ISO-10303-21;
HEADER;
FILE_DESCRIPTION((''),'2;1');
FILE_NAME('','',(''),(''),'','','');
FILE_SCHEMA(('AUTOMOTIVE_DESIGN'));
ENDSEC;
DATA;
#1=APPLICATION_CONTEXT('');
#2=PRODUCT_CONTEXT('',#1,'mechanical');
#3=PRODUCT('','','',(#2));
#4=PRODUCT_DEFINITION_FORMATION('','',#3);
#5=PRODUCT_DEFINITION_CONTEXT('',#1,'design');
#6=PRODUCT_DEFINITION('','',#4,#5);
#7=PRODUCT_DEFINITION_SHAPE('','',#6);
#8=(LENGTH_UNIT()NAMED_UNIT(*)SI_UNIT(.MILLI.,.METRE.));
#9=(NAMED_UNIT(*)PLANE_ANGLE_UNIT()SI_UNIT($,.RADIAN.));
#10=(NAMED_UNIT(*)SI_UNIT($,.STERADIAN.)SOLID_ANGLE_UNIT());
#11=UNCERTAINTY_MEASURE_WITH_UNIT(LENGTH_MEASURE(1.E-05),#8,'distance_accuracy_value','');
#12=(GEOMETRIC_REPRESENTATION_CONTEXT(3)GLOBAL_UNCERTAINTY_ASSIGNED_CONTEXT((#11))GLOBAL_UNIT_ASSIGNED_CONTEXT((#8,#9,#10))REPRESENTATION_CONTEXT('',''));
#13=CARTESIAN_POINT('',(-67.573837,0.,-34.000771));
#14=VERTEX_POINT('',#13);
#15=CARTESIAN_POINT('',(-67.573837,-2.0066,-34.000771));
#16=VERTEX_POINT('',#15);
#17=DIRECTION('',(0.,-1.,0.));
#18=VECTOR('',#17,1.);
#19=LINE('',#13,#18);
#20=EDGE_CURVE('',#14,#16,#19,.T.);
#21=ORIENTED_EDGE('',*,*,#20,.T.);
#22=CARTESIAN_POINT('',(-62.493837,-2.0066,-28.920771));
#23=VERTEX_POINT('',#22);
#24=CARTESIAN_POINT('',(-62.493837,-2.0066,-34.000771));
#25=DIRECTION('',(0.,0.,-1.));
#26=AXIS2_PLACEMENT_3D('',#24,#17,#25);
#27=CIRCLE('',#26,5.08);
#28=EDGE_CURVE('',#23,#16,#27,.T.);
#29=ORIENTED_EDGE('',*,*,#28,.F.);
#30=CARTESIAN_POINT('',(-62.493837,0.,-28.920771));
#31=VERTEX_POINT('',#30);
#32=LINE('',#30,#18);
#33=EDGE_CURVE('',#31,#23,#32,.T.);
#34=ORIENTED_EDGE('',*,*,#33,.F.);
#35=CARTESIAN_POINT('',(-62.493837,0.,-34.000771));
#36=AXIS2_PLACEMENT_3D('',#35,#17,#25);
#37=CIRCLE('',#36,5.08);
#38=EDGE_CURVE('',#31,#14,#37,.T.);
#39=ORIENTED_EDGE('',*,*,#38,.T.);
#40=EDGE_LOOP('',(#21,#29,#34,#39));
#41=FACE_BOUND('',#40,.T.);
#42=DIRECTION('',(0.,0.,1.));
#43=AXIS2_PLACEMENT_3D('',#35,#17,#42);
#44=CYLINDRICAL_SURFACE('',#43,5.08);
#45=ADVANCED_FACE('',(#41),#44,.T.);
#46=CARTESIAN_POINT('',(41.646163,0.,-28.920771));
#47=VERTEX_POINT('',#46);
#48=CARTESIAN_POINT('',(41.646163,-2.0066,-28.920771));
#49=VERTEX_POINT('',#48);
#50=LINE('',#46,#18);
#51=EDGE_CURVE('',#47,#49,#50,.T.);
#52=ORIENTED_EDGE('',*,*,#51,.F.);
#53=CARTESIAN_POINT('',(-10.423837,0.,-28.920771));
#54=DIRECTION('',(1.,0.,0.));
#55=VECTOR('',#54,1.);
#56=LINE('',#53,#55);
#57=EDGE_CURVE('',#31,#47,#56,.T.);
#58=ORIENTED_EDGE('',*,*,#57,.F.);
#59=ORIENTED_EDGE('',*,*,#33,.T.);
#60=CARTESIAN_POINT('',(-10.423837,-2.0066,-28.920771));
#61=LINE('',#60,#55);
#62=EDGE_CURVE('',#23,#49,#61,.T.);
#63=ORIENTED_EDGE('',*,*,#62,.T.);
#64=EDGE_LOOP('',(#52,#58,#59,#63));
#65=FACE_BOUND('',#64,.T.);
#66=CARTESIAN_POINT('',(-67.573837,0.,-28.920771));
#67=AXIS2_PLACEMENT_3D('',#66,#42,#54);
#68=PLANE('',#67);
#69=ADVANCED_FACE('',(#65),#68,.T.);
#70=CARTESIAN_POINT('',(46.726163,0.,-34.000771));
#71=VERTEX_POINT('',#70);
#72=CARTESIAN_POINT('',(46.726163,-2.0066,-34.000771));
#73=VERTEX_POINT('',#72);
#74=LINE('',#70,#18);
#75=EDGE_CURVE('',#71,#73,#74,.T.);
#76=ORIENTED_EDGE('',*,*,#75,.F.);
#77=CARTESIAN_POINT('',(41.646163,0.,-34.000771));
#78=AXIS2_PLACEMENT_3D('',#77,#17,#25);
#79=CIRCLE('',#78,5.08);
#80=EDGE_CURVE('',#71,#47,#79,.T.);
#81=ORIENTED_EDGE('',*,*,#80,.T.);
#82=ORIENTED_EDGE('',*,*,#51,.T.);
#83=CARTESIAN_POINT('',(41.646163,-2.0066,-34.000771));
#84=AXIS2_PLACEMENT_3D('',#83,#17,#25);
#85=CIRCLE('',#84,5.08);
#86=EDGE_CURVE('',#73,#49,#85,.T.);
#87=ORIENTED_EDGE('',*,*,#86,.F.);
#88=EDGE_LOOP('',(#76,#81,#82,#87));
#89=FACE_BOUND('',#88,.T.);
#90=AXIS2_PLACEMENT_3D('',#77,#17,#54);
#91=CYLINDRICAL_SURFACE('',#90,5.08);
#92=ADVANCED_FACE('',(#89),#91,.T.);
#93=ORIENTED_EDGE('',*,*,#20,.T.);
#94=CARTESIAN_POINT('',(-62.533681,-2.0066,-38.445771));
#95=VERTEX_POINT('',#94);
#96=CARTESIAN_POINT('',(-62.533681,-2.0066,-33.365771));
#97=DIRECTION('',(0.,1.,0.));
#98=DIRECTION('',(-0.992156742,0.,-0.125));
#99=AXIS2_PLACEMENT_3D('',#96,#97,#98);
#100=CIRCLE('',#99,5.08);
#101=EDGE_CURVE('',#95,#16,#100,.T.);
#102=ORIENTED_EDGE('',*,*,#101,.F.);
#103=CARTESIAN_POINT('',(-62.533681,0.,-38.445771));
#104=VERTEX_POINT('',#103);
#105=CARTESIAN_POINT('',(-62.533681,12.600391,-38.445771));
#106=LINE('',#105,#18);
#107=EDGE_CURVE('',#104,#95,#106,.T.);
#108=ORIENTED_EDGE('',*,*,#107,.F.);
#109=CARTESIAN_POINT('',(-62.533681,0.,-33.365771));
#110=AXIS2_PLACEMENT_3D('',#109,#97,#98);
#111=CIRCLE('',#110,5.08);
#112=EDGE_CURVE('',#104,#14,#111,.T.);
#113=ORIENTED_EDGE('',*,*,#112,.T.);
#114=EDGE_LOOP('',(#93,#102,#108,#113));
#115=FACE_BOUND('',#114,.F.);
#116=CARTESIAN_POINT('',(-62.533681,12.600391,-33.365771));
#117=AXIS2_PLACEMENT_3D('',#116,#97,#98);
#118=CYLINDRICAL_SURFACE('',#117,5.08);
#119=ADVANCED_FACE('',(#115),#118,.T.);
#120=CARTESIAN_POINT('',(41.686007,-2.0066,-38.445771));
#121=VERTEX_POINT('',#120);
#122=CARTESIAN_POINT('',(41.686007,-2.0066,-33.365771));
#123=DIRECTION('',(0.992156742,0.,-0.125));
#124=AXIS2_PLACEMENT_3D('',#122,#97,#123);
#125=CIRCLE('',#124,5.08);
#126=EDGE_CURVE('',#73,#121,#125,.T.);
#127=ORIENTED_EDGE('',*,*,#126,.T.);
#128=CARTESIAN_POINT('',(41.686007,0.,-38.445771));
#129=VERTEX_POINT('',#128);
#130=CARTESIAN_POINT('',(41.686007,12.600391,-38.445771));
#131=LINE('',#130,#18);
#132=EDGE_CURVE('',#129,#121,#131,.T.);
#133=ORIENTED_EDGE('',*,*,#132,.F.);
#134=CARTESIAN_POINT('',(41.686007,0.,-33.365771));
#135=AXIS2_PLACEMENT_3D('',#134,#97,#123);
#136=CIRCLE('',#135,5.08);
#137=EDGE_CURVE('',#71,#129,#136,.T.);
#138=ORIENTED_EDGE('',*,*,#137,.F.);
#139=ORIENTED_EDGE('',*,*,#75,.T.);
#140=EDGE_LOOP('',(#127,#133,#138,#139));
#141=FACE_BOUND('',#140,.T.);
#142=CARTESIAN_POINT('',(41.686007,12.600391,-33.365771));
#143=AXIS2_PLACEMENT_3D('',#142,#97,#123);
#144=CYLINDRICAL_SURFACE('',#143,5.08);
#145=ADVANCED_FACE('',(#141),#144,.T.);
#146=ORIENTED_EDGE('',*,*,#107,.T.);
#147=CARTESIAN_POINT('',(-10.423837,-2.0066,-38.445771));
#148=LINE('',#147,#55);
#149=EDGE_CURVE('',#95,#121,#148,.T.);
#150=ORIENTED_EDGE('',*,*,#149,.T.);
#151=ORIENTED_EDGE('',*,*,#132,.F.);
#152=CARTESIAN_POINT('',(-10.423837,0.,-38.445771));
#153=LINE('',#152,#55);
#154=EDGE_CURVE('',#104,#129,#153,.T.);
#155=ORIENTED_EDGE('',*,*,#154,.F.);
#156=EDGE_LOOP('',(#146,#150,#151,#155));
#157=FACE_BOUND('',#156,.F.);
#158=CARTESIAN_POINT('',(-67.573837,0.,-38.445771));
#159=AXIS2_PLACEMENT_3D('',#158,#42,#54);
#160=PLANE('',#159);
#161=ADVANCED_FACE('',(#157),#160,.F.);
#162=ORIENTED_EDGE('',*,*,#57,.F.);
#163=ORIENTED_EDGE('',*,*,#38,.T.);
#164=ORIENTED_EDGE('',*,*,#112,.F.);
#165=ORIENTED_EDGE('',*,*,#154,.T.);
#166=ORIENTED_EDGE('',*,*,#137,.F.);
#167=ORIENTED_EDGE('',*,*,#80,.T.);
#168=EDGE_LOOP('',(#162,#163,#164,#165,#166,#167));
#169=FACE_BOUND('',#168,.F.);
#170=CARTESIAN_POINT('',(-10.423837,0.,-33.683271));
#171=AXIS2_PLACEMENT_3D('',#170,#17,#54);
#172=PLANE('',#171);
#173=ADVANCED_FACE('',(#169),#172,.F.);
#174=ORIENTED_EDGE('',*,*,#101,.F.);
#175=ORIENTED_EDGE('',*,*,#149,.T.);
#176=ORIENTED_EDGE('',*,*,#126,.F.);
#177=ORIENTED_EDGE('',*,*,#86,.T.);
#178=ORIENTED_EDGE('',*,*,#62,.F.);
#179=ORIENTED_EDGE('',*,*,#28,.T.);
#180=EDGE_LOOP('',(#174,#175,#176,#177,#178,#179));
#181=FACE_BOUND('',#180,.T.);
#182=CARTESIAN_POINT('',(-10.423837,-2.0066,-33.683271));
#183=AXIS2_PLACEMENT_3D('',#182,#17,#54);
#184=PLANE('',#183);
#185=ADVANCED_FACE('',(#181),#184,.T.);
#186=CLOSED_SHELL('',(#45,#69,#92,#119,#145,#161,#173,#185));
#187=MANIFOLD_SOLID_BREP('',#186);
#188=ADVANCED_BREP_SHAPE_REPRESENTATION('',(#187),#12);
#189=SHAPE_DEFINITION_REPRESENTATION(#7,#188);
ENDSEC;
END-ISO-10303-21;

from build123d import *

# Parameters (mm, degrees)
F0_W        = 114.3
F0_H        = 9.525
F1_DEPTH    = 2.0066
F2_R        = 5.08
F3_T1_DEPTH = 27.2073812379
F4_R        = 5.08
F5_T1_DEPTH = 27.2073812379


# Not quite as in the source:
# - a fillet or chamfer that OpenCascade refuses, or shapes differently, is made with other operations: its cross-section is extruded or revolved along the edge and cut away or added


with BuildPart() as f1:
    # F0 (on Front) → F1 (new body)
    with BuildSketch(Plane.XZ):
        with Locations((-10.4238372296, -33.6832711485)):
            Rectangle(F0_W, F0_H)
    extrude(amount=F1_DEPTH)

    # F2
    f2_edges = [f1.edges().sort_by_distance(p)[0] for p in [
        (46.726163, -1.0033, -28.920771),
    ]]
    fillet(f2_edges, radius=F2_R)

    # F3: fillet of radius 5.08 on 1 edges, made by hand

    # F3_s2 → F3_t1 (cut)
    with BuildSketch(Plane.XZ.offset(-12.6003906189)):
        with BuildLine():
            ThreePointArc((46.7261627704, -34.0007711485), (45.0461106879, -37.1757711485), (41.6860065228, -38.4457711485))
            Line((41.6860065228, -38.4457711485), (46.7261627704, -38.4457711485))
            Line((46.7261627704, -38.4457711485), (46.7261627704, -34.0007711485))
        make_face()
    extrude(amount=F3_T1_DEPTH, mode=Mode.SUBTRACT)

    # F4
    f4_edges = [f1.edges().sort_by_distance(p)[0] for p in [
        (-67.573837, -1.0033, -28.920771),
    ]]
    fillet(f4_edges, radius=F4_R)

    # F5: fillet of radius 5.08 on 1 edges, made by hand

    # F5_s2 → F5_t1 (cut)
    with BuildSketch(Plane.XZ.offset(-12.6003906189)):
        with BuildLine():
            ThreePointArc((-67.5738372296, -34.0007711485), (-65.8937851471, -37.1757711485), (-62.533680982, -38.4457711485))
            Line((-62.533680982, -38.4457711485), (-67.5738372296, -38.4457711485))
            Line((-67.5738372296, -38.4457711485), (-67.5738372296, -34.0007711485))
        make_face()
    extrude(amount=F5_T1_DEPTH, mode=Mode.SUBTRACT)


solid = f1.part
